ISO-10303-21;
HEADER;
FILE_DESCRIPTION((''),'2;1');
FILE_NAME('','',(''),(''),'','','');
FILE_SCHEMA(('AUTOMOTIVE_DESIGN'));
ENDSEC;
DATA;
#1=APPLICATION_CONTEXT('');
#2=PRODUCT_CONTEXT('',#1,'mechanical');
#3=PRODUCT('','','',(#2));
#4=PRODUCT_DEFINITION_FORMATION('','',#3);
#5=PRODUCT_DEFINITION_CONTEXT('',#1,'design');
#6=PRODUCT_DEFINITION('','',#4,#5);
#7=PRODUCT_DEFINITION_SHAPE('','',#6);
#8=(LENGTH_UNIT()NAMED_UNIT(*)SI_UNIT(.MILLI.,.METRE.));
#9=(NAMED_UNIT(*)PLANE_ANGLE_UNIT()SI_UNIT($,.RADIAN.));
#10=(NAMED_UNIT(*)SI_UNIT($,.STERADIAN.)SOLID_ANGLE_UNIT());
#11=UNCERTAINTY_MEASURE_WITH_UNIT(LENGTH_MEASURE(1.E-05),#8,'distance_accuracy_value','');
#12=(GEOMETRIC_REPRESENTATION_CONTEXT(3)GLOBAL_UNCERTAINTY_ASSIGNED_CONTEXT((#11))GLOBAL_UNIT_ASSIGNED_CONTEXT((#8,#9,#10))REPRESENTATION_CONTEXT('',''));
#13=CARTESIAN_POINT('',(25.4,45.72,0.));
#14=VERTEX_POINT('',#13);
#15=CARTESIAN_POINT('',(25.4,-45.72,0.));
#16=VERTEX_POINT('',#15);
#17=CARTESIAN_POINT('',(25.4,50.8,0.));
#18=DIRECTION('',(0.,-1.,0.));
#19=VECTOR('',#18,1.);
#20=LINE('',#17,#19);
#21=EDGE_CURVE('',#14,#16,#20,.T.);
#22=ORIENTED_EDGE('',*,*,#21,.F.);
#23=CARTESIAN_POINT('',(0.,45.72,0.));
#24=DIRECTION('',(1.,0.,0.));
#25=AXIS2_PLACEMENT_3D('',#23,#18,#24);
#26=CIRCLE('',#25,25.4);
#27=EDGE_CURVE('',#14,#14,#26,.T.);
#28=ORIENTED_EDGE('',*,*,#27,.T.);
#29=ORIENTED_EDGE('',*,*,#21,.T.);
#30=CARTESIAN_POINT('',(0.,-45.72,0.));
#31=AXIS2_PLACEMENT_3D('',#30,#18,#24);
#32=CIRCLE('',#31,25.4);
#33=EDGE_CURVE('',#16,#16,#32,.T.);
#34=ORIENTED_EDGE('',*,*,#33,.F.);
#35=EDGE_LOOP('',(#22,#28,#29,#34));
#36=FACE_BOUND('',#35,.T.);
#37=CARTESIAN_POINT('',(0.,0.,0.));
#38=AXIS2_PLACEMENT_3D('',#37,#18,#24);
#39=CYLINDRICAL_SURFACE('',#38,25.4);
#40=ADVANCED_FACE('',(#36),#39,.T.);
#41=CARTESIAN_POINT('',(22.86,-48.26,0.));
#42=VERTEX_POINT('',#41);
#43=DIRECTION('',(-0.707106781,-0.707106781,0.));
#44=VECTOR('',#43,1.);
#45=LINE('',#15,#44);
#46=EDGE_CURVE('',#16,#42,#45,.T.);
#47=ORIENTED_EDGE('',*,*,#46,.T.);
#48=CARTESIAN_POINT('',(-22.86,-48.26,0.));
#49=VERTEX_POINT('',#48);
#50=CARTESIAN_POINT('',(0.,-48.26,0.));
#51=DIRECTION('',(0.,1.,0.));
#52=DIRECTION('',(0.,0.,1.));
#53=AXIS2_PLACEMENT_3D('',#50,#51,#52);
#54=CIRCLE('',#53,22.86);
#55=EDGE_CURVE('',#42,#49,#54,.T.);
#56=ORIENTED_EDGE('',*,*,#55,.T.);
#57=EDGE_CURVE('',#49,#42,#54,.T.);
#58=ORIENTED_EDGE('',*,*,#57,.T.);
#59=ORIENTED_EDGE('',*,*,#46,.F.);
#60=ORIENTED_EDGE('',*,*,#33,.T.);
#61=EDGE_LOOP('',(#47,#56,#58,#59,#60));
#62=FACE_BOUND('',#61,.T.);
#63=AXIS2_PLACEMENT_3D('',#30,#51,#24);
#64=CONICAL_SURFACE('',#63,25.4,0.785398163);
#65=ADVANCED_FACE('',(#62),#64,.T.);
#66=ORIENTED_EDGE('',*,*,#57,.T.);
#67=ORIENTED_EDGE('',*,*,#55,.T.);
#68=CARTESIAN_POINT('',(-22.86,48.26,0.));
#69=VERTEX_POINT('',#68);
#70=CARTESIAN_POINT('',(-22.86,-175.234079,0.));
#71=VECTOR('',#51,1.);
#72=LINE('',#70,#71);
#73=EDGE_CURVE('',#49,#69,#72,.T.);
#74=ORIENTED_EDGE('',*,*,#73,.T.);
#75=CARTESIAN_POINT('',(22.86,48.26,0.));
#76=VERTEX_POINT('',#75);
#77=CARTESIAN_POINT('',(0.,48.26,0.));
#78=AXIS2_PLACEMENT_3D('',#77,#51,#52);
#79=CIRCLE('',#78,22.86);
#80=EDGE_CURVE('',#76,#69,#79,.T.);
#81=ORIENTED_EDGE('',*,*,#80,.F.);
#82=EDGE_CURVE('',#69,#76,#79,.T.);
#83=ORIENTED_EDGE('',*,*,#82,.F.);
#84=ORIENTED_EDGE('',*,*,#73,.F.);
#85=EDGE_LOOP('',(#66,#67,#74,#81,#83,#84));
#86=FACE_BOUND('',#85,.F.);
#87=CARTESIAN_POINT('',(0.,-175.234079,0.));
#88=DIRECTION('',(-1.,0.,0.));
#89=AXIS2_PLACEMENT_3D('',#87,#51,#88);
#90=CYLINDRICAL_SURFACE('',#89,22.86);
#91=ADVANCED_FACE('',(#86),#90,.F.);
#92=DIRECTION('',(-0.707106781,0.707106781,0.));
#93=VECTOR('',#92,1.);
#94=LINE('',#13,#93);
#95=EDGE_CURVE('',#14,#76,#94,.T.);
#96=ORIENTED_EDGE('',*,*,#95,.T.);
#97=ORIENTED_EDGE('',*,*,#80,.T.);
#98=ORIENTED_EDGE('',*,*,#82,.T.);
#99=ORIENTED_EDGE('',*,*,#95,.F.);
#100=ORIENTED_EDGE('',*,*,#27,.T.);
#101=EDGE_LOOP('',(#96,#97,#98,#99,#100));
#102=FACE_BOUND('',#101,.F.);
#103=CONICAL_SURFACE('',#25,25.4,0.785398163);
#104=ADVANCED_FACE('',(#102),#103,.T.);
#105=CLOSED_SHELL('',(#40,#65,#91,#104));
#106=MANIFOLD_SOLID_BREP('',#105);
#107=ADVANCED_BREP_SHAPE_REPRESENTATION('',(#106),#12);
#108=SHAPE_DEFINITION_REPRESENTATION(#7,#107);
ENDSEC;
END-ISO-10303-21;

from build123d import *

# Parameters (mm, degrees)
F0_R     = 25.4
F0_R_2   = 23.495
F1_DEPTH = 50.8
F3_D     = 45.72


# Not quite as in the source:
# - a fillet or chamfer that OpenCascade refuses, or shapes differently, is made with other operations: its cross-section is extruded or revolved along the edge and cut away or added


with BuildPart() as f1:
    # F0 (on Front) → F1 (new body, symmetric)
    with BuildSketch(Plane.XZ):
        Circle(F0_R)
        Circle(F0_R_2, mode=Mode.SUBTRACT)
        Circle(F0_R_2)
    extrude(amount=F1_DEPTH, both=True)

    # F3 (through all)
    with Locations(Plane.XZ.offset(50.8)):
        with Locations((0, 0)):
            Hole(F3_D / 2)

    # F4: chamfer of 5.08 on 3 edges, made by hand

    # F4_s1 → F4_t2 (revolve, cut)
    with BuildSketch(Plane.XY):
        Polygon((25.4, 45.72), (20.32, 50.8), (25.4, 50.8), align=None)
    revolve(axis=Axis((0, 50.8, 0), (0, -1, 0)), mode=Mode.SUBTRACT)

    # F4_s3 → F4_t4 (revolve, cut)
    with BuildSketch(Plane.XY):
        Polygon((25.4, -45.72), (20.32, -50.8), (25.4, -50.8), align=None)
    revolve(axis=Axis((0, -50.8, 0), (0, -1, 0)), mode=Mode.SUBTRACT)


solid = f1.part
